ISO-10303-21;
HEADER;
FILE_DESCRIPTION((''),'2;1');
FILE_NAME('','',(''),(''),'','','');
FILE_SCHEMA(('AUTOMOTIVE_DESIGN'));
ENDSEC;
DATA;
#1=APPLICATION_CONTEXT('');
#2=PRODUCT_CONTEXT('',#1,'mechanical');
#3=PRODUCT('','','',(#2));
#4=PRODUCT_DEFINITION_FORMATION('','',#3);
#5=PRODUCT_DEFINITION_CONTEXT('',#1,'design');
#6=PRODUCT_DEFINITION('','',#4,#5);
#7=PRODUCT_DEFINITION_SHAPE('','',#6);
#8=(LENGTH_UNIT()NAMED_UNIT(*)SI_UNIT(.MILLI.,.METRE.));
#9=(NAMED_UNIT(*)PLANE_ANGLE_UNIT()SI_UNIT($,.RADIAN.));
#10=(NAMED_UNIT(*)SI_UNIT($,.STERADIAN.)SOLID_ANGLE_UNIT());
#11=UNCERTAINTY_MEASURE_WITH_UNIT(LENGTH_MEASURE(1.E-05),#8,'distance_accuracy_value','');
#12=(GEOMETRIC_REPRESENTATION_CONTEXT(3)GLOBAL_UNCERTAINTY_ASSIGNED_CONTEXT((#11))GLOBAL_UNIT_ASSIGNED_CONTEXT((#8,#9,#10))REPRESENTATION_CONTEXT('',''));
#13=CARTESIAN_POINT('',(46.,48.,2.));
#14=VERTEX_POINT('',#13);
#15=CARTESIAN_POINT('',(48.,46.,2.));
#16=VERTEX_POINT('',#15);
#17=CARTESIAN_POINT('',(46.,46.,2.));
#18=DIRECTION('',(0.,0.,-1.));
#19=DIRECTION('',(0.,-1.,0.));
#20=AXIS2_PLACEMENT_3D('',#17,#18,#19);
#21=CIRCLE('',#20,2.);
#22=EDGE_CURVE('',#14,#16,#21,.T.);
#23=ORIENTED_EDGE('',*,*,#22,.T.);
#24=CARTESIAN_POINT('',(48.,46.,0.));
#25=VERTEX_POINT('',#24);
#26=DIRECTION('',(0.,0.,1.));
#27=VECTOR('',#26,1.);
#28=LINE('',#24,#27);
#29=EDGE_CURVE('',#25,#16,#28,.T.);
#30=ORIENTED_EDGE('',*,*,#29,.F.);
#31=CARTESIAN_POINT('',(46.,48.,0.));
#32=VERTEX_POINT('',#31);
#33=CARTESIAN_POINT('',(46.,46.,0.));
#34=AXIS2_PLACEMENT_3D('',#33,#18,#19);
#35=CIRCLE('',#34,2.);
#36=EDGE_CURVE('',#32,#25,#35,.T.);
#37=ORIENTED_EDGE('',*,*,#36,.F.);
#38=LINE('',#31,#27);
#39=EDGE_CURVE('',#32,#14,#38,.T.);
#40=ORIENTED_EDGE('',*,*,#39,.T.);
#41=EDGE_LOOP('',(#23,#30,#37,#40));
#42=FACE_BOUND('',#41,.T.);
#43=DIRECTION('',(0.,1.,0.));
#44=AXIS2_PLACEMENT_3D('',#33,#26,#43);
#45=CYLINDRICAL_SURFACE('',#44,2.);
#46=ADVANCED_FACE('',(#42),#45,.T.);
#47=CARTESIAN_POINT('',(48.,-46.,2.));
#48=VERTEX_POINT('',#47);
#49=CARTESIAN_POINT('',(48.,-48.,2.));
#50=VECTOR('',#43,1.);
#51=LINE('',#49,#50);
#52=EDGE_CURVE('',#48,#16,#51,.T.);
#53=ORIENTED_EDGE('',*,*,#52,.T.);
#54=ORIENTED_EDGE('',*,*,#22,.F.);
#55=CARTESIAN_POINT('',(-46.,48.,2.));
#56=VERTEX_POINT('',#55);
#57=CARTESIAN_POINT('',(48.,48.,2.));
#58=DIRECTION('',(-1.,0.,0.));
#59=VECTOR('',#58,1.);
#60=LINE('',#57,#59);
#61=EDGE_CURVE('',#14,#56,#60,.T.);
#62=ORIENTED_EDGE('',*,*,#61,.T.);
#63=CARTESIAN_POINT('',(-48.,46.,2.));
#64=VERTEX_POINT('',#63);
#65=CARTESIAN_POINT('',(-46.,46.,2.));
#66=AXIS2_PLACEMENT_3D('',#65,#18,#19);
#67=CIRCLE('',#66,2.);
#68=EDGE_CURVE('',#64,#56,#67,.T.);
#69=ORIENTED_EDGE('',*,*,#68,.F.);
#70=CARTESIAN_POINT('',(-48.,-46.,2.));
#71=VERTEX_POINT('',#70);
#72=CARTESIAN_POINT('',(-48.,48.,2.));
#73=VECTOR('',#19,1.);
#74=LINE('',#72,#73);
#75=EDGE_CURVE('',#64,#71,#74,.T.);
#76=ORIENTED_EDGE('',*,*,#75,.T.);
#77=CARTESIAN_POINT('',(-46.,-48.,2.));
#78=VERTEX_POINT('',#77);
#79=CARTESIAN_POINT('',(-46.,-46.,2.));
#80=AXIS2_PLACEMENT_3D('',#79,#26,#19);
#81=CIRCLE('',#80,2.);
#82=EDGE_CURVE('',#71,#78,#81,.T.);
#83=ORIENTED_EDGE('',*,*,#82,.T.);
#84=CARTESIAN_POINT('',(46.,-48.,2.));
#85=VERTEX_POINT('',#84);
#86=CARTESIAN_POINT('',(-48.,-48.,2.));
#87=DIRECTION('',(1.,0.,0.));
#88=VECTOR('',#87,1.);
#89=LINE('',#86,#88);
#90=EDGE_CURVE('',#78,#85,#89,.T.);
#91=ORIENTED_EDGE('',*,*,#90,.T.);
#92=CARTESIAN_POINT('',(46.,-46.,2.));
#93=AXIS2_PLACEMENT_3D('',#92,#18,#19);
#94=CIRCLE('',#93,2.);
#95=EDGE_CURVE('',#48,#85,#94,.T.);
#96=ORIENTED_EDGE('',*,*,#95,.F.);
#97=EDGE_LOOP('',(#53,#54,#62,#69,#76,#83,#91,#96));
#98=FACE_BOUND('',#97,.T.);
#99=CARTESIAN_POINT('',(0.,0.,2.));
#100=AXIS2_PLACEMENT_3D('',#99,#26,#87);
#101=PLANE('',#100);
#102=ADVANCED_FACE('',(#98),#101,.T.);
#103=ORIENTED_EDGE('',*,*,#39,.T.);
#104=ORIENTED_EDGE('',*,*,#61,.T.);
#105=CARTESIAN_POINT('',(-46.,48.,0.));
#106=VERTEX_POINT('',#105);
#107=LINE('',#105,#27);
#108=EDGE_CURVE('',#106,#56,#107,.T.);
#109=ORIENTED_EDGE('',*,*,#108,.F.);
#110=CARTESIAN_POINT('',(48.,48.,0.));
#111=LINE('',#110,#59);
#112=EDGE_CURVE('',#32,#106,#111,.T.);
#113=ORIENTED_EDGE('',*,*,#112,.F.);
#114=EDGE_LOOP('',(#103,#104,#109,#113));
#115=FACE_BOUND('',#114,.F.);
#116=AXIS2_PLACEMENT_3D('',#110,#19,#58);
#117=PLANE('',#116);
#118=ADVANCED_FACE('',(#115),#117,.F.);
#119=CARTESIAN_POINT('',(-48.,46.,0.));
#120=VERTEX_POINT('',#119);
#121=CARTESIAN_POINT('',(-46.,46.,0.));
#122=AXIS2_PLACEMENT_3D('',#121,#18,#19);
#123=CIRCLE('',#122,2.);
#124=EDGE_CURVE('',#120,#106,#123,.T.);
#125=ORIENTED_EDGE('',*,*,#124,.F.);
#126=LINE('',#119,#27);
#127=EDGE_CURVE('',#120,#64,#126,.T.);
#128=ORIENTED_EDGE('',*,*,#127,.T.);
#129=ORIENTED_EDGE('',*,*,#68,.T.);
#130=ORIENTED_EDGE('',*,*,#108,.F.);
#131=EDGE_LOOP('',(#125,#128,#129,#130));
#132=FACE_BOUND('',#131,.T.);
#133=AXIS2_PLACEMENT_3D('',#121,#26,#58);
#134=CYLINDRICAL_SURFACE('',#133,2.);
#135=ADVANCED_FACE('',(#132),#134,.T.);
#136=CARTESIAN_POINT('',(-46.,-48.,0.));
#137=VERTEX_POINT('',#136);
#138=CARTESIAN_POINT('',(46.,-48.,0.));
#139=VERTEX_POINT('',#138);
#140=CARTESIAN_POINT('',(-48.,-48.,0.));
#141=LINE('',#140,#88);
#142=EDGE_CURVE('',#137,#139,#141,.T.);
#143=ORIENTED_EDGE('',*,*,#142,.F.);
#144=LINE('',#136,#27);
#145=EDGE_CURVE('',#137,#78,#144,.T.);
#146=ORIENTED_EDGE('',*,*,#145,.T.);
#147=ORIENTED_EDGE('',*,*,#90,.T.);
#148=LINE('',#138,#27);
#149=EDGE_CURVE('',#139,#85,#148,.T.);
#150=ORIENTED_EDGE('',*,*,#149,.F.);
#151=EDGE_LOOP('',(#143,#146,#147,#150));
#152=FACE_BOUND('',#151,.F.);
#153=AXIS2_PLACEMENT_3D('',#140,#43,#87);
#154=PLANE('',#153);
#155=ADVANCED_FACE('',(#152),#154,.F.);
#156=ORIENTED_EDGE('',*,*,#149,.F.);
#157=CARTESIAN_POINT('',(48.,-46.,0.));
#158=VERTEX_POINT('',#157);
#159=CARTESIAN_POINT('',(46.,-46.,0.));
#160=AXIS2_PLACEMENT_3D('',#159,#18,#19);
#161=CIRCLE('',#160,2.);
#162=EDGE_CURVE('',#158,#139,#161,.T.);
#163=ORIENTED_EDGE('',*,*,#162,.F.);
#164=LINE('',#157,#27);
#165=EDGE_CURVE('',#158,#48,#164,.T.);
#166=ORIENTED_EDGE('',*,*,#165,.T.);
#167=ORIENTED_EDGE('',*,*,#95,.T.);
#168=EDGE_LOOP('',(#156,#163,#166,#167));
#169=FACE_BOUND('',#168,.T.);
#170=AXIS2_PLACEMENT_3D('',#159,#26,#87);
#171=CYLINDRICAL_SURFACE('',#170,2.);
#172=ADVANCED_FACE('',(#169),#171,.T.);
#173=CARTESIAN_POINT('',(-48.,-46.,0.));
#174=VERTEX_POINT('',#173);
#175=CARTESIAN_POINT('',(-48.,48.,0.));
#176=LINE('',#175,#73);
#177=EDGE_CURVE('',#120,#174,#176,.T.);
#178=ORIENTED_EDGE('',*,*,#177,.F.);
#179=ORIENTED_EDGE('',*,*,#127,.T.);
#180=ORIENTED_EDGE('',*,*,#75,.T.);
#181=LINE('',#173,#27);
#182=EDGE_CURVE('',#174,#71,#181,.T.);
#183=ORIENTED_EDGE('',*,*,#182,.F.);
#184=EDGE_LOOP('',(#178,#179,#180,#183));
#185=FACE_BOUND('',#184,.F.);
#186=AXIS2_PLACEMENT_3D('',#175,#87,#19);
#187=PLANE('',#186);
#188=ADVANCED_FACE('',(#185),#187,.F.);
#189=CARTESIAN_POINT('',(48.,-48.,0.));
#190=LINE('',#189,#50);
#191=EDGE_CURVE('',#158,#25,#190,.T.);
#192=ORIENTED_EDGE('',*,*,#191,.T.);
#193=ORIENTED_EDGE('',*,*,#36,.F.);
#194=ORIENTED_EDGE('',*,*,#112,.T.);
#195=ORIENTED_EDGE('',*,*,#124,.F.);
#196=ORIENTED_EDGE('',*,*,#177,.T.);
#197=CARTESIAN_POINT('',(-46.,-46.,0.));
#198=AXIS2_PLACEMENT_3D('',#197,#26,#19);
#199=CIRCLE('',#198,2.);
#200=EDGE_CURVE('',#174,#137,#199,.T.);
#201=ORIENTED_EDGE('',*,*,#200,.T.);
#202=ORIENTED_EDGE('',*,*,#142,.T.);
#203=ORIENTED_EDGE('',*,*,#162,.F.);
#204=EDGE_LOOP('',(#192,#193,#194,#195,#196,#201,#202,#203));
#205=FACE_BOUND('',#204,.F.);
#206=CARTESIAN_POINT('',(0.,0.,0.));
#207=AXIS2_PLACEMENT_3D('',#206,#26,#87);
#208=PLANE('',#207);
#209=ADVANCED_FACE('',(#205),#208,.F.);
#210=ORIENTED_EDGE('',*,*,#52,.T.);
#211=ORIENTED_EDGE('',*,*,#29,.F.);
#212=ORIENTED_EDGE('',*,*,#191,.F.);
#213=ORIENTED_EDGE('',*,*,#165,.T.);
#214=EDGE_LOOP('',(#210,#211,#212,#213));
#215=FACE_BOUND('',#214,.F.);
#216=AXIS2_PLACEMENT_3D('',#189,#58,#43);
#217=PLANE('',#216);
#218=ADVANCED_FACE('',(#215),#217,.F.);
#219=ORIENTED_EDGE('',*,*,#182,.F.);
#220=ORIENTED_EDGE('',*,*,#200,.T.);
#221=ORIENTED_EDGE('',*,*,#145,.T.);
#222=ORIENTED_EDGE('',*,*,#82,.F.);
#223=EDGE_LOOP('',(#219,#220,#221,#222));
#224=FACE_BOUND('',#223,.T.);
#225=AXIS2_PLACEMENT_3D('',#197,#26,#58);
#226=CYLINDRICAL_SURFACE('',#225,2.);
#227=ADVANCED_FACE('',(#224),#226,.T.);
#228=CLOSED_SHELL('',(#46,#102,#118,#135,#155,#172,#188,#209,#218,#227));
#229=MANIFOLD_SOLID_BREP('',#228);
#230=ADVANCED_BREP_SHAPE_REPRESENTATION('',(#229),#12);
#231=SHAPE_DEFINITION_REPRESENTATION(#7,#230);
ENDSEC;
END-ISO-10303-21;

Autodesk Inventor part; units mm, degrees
ref_plane "YZ Plane" through (0, 0, 0) normal (1, 0, 0) x (0, 1, 0)
ref_plane "XZ Plane" through (0, 0, 0) normal (0, 1, 0) x (-1, 0, 0)
ref_plane "XY Plane" through (0, 0, 0) normal (0, 0, 1) x (1, 0, 0)
sketch "Sketch1" plane through (0, 0, 0) normal (0, 0, 1) x (1, 0, 0)
  line L0 (-48, -48) -> (48, -48)
  line L1 (48, -48) -> (48, 48)
  line L2 (48, 48) -> (-48, 48)
  line L3 (-48, 48) -> (-48, -48)
  line L4 (-48, -48) -> (48, 48) construction
  line L5 (48, -48) -> (-48, 48) construction
  point P0 (0, 0)
  dimension "d154" = 96
  dimension "d155" = 96
extrude "Plate5" add sketch "Sketch1" along normal blind 2
fillet "Corner Round1" radius 2 4 edges at (48, 48, 1) (-48, 48, 1) (-48, -48, 1) (48, -48, 1)
properties part number "PNS 1665 FDS 1000 CUP 1" material "Stainless Steel"
